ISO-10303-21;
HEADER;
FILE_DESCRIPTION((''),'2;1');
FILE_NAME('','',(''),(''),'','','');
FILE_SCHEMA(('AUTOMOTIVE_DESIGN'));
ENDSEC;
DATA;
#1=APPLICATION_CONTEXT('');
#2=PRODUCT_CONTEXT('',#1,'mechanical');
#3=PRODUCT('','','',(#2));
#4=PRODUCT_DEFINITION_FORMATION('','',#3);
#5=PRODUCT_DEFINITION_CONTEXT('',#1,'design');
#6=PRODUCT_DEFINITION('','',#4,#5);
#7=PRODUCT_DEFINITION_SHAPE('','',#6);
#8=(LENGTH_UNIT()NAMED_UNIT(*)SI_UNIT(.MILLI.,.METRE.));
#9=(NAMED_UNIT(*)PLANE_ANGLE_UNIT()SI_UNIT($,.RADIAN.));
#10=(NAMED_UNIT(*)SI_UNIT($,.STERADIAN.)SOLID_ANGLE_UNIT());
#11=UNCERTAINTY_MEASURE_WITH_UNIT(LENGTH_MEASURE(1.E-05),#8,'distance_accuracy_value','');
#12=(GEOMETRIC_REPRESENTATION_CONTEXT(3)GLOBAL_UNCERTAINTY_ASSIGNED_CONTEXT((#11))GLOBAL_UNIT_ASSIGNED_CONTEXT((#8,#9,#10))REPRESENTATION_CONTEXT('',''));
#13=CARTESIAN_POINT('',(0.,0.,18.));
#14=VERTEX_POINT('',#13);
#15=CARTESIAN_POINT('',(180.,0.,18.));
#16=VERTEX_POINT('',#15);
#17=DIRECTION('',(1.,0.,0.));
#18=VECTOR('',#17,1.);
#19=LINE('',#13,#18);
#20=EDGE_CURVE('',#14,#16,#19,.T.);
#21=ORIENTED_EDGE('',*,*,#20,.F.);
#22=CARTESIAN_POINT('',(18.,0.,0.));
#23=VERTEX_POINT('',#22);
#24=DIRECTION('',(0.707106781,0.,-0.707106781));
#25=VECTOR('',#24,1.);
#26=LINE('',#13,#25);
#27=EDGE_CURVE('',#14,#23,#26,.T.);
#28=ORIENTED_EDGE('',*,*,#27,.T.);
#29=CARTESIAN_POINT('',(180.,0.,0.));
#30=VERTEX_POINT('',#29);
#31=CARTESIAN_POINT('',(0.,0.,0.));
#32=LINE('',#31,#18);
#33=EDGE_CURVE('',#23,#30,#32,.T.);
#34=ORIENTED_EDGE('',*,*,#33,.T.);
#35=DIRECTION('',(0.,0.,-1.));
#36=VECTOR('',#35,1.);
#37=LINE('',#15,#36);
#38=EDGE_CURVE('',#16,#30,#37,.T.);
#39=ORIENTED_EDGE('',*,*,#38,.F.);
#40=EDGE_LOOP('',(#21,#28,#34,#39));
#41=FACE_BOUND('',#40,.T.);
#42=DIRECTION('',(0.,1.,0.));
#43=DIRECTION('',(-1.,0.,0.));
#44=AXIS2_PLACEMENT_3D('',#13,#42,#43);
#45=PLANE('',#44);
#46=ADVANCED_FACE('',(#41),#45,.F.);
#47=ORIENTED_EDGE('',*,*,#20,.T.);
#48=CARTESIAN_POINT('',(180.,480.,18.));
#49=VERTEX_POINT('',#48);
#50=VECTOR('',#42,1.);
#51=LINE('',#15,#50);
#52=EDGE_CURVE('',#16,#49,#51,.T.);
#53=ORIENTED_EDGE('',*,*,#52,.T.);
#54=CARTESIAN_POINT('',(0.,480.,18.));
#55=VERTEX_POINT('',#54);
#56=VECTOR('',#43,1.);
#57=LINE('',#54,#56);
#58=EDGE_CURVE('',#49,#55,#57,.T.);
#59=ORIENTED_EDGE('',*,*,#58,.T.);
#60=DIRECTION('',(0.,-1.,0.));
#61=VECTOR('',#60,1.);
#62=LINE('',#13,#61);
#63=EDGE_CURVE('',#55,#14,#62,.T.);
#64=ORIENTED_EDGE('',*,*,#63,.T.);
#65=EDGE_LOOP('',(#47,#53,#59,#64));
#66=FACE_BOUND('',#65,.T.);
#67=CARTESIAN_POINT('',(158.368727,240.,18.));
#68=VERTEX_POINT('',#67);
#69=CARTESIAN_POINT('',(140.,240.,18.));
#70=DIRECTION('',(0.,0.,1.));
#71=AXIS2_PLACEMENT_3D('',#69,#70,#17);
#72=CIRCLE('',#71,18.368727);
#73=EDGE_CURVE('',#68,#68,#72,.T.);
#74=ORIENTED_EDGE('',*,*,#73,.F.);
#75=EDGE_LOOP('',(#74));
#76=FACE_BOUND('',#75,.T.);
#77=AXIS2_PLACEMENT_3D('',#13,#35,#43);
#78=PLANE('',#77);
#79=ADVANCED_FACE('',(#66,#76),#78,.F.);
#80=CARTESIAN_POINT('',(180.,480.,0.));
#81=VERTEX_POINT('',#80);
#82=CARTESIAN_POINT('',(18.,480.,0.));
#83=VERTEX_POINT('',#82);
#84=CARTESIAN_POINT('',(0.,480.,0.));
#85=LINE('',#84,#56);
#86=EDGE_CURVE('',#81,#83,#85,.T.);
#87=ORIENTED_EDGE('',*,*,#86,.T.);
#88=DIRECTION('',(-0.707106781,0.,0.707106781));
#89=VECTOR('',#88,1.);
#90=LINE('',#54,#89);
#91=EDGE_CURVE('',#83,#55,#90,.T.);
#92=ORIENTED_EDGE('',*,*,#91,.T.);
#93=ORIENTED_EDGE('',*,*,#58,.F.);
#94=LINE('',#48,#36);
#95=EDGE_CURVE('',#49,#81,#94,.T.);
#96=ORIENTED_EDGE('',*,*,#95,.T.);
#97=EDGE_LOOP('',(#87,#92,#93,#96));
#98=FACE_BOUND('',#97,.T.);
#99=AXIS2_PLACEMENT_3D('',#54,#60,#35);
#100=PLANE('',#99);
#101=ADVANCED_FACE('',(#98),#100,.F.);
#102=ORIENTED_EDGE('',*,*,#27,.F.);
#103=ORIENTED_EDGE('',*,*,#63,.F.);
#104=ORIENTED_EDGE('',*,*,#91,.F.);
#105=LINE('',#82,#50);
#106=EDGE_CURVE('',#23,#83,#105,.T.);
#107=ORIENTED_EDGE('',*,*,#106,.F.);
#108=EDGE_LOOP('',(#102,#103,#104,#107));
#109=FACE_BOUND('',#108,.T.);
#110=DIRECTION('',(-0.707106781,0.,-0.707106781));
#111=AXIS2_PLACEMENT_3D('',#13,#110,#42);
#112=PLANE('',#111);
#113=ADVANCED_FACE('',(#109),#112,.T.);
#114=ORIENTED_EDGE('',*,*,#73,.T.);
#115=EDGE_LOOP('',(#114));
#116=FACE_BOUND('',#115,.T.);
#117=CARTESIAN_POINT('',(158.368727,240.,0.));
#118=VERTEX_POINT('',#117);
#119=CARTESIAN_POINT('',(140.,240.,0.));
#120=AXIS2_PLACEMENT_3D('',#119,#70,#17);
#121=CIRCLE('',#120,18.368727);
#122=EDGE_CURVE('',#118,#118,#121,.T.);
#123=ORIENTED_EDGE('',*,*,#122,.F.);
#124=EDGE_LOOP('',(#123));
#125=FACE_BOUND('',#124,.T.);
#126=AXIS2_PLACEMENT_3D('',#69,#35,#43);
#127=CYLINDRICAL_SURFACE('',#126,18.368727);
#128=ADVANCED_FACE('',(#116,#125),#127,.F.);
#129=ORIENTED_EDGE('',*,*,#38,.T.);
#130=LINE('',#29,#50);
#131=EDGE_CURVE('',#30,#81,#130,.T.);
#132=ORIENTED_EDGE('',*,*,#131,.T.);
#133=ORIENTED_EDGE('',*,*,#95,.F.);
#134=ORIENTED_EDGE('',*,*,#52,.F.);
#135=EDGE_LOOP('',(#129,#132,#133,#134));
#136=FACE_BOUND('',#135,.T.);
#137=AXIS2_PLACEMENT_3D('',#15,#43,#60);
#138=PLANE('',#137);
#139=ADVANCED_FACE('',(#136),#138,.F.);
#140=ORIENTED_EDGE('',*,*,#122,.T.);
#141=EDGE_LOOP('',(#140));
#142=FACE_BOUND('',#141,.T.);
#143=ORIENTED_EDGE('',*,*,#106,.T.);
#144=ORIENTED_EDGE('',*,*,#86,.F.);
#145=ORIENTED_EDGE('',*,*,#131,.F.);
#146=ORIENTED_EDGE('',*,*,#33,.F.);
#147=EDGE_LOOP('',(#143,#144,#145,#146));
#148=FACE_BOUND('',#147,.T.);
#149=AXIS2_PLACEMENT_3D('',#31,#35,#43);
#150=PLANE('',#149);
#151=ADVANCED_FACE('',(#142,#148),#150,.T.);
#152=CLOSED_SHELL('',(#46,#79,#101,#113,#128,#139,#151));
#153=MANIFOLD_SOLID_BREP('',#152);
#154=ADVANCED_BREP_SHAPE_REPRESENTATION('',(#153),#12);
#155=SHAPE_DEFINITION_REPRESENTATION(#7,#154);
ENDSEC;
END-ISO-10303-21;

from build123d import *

# Parameters (mm, degrees)
SKETCH1_W           = 180
SKETCH1_H           = 480
SKETCH1_R           = 18.368726539
BOSS_EXTRUDE1_DEPTH = 18
CHAMFER1_SIZE       = 18


with BuildPart() as part:
    # Sketch1 → Boss-Extrude1 (new body)
    with BuildSketch(Plane.XY):
        with Locations((90, 240)):
            Rectangle(SKETCH1_W, SKETCH1_H)
        with Locations((140, 240)):
            Circle(SKETCH1_R, mode=Mode.SUBTRACT)
    extrude(amount=BOSS_EXTRUDE1_DEPTH)

    # Chamfer1
    chamfer1_edges = [part.edges().sort_by_distance(p)[0] for p in [
        (0, 240, 0),
    ]]
    chamfer(chamfer1_edges, length=CHAMFER1_SIZE - 0.0001)  # a hair under: the kernel refuses the full size


solid = part.part
